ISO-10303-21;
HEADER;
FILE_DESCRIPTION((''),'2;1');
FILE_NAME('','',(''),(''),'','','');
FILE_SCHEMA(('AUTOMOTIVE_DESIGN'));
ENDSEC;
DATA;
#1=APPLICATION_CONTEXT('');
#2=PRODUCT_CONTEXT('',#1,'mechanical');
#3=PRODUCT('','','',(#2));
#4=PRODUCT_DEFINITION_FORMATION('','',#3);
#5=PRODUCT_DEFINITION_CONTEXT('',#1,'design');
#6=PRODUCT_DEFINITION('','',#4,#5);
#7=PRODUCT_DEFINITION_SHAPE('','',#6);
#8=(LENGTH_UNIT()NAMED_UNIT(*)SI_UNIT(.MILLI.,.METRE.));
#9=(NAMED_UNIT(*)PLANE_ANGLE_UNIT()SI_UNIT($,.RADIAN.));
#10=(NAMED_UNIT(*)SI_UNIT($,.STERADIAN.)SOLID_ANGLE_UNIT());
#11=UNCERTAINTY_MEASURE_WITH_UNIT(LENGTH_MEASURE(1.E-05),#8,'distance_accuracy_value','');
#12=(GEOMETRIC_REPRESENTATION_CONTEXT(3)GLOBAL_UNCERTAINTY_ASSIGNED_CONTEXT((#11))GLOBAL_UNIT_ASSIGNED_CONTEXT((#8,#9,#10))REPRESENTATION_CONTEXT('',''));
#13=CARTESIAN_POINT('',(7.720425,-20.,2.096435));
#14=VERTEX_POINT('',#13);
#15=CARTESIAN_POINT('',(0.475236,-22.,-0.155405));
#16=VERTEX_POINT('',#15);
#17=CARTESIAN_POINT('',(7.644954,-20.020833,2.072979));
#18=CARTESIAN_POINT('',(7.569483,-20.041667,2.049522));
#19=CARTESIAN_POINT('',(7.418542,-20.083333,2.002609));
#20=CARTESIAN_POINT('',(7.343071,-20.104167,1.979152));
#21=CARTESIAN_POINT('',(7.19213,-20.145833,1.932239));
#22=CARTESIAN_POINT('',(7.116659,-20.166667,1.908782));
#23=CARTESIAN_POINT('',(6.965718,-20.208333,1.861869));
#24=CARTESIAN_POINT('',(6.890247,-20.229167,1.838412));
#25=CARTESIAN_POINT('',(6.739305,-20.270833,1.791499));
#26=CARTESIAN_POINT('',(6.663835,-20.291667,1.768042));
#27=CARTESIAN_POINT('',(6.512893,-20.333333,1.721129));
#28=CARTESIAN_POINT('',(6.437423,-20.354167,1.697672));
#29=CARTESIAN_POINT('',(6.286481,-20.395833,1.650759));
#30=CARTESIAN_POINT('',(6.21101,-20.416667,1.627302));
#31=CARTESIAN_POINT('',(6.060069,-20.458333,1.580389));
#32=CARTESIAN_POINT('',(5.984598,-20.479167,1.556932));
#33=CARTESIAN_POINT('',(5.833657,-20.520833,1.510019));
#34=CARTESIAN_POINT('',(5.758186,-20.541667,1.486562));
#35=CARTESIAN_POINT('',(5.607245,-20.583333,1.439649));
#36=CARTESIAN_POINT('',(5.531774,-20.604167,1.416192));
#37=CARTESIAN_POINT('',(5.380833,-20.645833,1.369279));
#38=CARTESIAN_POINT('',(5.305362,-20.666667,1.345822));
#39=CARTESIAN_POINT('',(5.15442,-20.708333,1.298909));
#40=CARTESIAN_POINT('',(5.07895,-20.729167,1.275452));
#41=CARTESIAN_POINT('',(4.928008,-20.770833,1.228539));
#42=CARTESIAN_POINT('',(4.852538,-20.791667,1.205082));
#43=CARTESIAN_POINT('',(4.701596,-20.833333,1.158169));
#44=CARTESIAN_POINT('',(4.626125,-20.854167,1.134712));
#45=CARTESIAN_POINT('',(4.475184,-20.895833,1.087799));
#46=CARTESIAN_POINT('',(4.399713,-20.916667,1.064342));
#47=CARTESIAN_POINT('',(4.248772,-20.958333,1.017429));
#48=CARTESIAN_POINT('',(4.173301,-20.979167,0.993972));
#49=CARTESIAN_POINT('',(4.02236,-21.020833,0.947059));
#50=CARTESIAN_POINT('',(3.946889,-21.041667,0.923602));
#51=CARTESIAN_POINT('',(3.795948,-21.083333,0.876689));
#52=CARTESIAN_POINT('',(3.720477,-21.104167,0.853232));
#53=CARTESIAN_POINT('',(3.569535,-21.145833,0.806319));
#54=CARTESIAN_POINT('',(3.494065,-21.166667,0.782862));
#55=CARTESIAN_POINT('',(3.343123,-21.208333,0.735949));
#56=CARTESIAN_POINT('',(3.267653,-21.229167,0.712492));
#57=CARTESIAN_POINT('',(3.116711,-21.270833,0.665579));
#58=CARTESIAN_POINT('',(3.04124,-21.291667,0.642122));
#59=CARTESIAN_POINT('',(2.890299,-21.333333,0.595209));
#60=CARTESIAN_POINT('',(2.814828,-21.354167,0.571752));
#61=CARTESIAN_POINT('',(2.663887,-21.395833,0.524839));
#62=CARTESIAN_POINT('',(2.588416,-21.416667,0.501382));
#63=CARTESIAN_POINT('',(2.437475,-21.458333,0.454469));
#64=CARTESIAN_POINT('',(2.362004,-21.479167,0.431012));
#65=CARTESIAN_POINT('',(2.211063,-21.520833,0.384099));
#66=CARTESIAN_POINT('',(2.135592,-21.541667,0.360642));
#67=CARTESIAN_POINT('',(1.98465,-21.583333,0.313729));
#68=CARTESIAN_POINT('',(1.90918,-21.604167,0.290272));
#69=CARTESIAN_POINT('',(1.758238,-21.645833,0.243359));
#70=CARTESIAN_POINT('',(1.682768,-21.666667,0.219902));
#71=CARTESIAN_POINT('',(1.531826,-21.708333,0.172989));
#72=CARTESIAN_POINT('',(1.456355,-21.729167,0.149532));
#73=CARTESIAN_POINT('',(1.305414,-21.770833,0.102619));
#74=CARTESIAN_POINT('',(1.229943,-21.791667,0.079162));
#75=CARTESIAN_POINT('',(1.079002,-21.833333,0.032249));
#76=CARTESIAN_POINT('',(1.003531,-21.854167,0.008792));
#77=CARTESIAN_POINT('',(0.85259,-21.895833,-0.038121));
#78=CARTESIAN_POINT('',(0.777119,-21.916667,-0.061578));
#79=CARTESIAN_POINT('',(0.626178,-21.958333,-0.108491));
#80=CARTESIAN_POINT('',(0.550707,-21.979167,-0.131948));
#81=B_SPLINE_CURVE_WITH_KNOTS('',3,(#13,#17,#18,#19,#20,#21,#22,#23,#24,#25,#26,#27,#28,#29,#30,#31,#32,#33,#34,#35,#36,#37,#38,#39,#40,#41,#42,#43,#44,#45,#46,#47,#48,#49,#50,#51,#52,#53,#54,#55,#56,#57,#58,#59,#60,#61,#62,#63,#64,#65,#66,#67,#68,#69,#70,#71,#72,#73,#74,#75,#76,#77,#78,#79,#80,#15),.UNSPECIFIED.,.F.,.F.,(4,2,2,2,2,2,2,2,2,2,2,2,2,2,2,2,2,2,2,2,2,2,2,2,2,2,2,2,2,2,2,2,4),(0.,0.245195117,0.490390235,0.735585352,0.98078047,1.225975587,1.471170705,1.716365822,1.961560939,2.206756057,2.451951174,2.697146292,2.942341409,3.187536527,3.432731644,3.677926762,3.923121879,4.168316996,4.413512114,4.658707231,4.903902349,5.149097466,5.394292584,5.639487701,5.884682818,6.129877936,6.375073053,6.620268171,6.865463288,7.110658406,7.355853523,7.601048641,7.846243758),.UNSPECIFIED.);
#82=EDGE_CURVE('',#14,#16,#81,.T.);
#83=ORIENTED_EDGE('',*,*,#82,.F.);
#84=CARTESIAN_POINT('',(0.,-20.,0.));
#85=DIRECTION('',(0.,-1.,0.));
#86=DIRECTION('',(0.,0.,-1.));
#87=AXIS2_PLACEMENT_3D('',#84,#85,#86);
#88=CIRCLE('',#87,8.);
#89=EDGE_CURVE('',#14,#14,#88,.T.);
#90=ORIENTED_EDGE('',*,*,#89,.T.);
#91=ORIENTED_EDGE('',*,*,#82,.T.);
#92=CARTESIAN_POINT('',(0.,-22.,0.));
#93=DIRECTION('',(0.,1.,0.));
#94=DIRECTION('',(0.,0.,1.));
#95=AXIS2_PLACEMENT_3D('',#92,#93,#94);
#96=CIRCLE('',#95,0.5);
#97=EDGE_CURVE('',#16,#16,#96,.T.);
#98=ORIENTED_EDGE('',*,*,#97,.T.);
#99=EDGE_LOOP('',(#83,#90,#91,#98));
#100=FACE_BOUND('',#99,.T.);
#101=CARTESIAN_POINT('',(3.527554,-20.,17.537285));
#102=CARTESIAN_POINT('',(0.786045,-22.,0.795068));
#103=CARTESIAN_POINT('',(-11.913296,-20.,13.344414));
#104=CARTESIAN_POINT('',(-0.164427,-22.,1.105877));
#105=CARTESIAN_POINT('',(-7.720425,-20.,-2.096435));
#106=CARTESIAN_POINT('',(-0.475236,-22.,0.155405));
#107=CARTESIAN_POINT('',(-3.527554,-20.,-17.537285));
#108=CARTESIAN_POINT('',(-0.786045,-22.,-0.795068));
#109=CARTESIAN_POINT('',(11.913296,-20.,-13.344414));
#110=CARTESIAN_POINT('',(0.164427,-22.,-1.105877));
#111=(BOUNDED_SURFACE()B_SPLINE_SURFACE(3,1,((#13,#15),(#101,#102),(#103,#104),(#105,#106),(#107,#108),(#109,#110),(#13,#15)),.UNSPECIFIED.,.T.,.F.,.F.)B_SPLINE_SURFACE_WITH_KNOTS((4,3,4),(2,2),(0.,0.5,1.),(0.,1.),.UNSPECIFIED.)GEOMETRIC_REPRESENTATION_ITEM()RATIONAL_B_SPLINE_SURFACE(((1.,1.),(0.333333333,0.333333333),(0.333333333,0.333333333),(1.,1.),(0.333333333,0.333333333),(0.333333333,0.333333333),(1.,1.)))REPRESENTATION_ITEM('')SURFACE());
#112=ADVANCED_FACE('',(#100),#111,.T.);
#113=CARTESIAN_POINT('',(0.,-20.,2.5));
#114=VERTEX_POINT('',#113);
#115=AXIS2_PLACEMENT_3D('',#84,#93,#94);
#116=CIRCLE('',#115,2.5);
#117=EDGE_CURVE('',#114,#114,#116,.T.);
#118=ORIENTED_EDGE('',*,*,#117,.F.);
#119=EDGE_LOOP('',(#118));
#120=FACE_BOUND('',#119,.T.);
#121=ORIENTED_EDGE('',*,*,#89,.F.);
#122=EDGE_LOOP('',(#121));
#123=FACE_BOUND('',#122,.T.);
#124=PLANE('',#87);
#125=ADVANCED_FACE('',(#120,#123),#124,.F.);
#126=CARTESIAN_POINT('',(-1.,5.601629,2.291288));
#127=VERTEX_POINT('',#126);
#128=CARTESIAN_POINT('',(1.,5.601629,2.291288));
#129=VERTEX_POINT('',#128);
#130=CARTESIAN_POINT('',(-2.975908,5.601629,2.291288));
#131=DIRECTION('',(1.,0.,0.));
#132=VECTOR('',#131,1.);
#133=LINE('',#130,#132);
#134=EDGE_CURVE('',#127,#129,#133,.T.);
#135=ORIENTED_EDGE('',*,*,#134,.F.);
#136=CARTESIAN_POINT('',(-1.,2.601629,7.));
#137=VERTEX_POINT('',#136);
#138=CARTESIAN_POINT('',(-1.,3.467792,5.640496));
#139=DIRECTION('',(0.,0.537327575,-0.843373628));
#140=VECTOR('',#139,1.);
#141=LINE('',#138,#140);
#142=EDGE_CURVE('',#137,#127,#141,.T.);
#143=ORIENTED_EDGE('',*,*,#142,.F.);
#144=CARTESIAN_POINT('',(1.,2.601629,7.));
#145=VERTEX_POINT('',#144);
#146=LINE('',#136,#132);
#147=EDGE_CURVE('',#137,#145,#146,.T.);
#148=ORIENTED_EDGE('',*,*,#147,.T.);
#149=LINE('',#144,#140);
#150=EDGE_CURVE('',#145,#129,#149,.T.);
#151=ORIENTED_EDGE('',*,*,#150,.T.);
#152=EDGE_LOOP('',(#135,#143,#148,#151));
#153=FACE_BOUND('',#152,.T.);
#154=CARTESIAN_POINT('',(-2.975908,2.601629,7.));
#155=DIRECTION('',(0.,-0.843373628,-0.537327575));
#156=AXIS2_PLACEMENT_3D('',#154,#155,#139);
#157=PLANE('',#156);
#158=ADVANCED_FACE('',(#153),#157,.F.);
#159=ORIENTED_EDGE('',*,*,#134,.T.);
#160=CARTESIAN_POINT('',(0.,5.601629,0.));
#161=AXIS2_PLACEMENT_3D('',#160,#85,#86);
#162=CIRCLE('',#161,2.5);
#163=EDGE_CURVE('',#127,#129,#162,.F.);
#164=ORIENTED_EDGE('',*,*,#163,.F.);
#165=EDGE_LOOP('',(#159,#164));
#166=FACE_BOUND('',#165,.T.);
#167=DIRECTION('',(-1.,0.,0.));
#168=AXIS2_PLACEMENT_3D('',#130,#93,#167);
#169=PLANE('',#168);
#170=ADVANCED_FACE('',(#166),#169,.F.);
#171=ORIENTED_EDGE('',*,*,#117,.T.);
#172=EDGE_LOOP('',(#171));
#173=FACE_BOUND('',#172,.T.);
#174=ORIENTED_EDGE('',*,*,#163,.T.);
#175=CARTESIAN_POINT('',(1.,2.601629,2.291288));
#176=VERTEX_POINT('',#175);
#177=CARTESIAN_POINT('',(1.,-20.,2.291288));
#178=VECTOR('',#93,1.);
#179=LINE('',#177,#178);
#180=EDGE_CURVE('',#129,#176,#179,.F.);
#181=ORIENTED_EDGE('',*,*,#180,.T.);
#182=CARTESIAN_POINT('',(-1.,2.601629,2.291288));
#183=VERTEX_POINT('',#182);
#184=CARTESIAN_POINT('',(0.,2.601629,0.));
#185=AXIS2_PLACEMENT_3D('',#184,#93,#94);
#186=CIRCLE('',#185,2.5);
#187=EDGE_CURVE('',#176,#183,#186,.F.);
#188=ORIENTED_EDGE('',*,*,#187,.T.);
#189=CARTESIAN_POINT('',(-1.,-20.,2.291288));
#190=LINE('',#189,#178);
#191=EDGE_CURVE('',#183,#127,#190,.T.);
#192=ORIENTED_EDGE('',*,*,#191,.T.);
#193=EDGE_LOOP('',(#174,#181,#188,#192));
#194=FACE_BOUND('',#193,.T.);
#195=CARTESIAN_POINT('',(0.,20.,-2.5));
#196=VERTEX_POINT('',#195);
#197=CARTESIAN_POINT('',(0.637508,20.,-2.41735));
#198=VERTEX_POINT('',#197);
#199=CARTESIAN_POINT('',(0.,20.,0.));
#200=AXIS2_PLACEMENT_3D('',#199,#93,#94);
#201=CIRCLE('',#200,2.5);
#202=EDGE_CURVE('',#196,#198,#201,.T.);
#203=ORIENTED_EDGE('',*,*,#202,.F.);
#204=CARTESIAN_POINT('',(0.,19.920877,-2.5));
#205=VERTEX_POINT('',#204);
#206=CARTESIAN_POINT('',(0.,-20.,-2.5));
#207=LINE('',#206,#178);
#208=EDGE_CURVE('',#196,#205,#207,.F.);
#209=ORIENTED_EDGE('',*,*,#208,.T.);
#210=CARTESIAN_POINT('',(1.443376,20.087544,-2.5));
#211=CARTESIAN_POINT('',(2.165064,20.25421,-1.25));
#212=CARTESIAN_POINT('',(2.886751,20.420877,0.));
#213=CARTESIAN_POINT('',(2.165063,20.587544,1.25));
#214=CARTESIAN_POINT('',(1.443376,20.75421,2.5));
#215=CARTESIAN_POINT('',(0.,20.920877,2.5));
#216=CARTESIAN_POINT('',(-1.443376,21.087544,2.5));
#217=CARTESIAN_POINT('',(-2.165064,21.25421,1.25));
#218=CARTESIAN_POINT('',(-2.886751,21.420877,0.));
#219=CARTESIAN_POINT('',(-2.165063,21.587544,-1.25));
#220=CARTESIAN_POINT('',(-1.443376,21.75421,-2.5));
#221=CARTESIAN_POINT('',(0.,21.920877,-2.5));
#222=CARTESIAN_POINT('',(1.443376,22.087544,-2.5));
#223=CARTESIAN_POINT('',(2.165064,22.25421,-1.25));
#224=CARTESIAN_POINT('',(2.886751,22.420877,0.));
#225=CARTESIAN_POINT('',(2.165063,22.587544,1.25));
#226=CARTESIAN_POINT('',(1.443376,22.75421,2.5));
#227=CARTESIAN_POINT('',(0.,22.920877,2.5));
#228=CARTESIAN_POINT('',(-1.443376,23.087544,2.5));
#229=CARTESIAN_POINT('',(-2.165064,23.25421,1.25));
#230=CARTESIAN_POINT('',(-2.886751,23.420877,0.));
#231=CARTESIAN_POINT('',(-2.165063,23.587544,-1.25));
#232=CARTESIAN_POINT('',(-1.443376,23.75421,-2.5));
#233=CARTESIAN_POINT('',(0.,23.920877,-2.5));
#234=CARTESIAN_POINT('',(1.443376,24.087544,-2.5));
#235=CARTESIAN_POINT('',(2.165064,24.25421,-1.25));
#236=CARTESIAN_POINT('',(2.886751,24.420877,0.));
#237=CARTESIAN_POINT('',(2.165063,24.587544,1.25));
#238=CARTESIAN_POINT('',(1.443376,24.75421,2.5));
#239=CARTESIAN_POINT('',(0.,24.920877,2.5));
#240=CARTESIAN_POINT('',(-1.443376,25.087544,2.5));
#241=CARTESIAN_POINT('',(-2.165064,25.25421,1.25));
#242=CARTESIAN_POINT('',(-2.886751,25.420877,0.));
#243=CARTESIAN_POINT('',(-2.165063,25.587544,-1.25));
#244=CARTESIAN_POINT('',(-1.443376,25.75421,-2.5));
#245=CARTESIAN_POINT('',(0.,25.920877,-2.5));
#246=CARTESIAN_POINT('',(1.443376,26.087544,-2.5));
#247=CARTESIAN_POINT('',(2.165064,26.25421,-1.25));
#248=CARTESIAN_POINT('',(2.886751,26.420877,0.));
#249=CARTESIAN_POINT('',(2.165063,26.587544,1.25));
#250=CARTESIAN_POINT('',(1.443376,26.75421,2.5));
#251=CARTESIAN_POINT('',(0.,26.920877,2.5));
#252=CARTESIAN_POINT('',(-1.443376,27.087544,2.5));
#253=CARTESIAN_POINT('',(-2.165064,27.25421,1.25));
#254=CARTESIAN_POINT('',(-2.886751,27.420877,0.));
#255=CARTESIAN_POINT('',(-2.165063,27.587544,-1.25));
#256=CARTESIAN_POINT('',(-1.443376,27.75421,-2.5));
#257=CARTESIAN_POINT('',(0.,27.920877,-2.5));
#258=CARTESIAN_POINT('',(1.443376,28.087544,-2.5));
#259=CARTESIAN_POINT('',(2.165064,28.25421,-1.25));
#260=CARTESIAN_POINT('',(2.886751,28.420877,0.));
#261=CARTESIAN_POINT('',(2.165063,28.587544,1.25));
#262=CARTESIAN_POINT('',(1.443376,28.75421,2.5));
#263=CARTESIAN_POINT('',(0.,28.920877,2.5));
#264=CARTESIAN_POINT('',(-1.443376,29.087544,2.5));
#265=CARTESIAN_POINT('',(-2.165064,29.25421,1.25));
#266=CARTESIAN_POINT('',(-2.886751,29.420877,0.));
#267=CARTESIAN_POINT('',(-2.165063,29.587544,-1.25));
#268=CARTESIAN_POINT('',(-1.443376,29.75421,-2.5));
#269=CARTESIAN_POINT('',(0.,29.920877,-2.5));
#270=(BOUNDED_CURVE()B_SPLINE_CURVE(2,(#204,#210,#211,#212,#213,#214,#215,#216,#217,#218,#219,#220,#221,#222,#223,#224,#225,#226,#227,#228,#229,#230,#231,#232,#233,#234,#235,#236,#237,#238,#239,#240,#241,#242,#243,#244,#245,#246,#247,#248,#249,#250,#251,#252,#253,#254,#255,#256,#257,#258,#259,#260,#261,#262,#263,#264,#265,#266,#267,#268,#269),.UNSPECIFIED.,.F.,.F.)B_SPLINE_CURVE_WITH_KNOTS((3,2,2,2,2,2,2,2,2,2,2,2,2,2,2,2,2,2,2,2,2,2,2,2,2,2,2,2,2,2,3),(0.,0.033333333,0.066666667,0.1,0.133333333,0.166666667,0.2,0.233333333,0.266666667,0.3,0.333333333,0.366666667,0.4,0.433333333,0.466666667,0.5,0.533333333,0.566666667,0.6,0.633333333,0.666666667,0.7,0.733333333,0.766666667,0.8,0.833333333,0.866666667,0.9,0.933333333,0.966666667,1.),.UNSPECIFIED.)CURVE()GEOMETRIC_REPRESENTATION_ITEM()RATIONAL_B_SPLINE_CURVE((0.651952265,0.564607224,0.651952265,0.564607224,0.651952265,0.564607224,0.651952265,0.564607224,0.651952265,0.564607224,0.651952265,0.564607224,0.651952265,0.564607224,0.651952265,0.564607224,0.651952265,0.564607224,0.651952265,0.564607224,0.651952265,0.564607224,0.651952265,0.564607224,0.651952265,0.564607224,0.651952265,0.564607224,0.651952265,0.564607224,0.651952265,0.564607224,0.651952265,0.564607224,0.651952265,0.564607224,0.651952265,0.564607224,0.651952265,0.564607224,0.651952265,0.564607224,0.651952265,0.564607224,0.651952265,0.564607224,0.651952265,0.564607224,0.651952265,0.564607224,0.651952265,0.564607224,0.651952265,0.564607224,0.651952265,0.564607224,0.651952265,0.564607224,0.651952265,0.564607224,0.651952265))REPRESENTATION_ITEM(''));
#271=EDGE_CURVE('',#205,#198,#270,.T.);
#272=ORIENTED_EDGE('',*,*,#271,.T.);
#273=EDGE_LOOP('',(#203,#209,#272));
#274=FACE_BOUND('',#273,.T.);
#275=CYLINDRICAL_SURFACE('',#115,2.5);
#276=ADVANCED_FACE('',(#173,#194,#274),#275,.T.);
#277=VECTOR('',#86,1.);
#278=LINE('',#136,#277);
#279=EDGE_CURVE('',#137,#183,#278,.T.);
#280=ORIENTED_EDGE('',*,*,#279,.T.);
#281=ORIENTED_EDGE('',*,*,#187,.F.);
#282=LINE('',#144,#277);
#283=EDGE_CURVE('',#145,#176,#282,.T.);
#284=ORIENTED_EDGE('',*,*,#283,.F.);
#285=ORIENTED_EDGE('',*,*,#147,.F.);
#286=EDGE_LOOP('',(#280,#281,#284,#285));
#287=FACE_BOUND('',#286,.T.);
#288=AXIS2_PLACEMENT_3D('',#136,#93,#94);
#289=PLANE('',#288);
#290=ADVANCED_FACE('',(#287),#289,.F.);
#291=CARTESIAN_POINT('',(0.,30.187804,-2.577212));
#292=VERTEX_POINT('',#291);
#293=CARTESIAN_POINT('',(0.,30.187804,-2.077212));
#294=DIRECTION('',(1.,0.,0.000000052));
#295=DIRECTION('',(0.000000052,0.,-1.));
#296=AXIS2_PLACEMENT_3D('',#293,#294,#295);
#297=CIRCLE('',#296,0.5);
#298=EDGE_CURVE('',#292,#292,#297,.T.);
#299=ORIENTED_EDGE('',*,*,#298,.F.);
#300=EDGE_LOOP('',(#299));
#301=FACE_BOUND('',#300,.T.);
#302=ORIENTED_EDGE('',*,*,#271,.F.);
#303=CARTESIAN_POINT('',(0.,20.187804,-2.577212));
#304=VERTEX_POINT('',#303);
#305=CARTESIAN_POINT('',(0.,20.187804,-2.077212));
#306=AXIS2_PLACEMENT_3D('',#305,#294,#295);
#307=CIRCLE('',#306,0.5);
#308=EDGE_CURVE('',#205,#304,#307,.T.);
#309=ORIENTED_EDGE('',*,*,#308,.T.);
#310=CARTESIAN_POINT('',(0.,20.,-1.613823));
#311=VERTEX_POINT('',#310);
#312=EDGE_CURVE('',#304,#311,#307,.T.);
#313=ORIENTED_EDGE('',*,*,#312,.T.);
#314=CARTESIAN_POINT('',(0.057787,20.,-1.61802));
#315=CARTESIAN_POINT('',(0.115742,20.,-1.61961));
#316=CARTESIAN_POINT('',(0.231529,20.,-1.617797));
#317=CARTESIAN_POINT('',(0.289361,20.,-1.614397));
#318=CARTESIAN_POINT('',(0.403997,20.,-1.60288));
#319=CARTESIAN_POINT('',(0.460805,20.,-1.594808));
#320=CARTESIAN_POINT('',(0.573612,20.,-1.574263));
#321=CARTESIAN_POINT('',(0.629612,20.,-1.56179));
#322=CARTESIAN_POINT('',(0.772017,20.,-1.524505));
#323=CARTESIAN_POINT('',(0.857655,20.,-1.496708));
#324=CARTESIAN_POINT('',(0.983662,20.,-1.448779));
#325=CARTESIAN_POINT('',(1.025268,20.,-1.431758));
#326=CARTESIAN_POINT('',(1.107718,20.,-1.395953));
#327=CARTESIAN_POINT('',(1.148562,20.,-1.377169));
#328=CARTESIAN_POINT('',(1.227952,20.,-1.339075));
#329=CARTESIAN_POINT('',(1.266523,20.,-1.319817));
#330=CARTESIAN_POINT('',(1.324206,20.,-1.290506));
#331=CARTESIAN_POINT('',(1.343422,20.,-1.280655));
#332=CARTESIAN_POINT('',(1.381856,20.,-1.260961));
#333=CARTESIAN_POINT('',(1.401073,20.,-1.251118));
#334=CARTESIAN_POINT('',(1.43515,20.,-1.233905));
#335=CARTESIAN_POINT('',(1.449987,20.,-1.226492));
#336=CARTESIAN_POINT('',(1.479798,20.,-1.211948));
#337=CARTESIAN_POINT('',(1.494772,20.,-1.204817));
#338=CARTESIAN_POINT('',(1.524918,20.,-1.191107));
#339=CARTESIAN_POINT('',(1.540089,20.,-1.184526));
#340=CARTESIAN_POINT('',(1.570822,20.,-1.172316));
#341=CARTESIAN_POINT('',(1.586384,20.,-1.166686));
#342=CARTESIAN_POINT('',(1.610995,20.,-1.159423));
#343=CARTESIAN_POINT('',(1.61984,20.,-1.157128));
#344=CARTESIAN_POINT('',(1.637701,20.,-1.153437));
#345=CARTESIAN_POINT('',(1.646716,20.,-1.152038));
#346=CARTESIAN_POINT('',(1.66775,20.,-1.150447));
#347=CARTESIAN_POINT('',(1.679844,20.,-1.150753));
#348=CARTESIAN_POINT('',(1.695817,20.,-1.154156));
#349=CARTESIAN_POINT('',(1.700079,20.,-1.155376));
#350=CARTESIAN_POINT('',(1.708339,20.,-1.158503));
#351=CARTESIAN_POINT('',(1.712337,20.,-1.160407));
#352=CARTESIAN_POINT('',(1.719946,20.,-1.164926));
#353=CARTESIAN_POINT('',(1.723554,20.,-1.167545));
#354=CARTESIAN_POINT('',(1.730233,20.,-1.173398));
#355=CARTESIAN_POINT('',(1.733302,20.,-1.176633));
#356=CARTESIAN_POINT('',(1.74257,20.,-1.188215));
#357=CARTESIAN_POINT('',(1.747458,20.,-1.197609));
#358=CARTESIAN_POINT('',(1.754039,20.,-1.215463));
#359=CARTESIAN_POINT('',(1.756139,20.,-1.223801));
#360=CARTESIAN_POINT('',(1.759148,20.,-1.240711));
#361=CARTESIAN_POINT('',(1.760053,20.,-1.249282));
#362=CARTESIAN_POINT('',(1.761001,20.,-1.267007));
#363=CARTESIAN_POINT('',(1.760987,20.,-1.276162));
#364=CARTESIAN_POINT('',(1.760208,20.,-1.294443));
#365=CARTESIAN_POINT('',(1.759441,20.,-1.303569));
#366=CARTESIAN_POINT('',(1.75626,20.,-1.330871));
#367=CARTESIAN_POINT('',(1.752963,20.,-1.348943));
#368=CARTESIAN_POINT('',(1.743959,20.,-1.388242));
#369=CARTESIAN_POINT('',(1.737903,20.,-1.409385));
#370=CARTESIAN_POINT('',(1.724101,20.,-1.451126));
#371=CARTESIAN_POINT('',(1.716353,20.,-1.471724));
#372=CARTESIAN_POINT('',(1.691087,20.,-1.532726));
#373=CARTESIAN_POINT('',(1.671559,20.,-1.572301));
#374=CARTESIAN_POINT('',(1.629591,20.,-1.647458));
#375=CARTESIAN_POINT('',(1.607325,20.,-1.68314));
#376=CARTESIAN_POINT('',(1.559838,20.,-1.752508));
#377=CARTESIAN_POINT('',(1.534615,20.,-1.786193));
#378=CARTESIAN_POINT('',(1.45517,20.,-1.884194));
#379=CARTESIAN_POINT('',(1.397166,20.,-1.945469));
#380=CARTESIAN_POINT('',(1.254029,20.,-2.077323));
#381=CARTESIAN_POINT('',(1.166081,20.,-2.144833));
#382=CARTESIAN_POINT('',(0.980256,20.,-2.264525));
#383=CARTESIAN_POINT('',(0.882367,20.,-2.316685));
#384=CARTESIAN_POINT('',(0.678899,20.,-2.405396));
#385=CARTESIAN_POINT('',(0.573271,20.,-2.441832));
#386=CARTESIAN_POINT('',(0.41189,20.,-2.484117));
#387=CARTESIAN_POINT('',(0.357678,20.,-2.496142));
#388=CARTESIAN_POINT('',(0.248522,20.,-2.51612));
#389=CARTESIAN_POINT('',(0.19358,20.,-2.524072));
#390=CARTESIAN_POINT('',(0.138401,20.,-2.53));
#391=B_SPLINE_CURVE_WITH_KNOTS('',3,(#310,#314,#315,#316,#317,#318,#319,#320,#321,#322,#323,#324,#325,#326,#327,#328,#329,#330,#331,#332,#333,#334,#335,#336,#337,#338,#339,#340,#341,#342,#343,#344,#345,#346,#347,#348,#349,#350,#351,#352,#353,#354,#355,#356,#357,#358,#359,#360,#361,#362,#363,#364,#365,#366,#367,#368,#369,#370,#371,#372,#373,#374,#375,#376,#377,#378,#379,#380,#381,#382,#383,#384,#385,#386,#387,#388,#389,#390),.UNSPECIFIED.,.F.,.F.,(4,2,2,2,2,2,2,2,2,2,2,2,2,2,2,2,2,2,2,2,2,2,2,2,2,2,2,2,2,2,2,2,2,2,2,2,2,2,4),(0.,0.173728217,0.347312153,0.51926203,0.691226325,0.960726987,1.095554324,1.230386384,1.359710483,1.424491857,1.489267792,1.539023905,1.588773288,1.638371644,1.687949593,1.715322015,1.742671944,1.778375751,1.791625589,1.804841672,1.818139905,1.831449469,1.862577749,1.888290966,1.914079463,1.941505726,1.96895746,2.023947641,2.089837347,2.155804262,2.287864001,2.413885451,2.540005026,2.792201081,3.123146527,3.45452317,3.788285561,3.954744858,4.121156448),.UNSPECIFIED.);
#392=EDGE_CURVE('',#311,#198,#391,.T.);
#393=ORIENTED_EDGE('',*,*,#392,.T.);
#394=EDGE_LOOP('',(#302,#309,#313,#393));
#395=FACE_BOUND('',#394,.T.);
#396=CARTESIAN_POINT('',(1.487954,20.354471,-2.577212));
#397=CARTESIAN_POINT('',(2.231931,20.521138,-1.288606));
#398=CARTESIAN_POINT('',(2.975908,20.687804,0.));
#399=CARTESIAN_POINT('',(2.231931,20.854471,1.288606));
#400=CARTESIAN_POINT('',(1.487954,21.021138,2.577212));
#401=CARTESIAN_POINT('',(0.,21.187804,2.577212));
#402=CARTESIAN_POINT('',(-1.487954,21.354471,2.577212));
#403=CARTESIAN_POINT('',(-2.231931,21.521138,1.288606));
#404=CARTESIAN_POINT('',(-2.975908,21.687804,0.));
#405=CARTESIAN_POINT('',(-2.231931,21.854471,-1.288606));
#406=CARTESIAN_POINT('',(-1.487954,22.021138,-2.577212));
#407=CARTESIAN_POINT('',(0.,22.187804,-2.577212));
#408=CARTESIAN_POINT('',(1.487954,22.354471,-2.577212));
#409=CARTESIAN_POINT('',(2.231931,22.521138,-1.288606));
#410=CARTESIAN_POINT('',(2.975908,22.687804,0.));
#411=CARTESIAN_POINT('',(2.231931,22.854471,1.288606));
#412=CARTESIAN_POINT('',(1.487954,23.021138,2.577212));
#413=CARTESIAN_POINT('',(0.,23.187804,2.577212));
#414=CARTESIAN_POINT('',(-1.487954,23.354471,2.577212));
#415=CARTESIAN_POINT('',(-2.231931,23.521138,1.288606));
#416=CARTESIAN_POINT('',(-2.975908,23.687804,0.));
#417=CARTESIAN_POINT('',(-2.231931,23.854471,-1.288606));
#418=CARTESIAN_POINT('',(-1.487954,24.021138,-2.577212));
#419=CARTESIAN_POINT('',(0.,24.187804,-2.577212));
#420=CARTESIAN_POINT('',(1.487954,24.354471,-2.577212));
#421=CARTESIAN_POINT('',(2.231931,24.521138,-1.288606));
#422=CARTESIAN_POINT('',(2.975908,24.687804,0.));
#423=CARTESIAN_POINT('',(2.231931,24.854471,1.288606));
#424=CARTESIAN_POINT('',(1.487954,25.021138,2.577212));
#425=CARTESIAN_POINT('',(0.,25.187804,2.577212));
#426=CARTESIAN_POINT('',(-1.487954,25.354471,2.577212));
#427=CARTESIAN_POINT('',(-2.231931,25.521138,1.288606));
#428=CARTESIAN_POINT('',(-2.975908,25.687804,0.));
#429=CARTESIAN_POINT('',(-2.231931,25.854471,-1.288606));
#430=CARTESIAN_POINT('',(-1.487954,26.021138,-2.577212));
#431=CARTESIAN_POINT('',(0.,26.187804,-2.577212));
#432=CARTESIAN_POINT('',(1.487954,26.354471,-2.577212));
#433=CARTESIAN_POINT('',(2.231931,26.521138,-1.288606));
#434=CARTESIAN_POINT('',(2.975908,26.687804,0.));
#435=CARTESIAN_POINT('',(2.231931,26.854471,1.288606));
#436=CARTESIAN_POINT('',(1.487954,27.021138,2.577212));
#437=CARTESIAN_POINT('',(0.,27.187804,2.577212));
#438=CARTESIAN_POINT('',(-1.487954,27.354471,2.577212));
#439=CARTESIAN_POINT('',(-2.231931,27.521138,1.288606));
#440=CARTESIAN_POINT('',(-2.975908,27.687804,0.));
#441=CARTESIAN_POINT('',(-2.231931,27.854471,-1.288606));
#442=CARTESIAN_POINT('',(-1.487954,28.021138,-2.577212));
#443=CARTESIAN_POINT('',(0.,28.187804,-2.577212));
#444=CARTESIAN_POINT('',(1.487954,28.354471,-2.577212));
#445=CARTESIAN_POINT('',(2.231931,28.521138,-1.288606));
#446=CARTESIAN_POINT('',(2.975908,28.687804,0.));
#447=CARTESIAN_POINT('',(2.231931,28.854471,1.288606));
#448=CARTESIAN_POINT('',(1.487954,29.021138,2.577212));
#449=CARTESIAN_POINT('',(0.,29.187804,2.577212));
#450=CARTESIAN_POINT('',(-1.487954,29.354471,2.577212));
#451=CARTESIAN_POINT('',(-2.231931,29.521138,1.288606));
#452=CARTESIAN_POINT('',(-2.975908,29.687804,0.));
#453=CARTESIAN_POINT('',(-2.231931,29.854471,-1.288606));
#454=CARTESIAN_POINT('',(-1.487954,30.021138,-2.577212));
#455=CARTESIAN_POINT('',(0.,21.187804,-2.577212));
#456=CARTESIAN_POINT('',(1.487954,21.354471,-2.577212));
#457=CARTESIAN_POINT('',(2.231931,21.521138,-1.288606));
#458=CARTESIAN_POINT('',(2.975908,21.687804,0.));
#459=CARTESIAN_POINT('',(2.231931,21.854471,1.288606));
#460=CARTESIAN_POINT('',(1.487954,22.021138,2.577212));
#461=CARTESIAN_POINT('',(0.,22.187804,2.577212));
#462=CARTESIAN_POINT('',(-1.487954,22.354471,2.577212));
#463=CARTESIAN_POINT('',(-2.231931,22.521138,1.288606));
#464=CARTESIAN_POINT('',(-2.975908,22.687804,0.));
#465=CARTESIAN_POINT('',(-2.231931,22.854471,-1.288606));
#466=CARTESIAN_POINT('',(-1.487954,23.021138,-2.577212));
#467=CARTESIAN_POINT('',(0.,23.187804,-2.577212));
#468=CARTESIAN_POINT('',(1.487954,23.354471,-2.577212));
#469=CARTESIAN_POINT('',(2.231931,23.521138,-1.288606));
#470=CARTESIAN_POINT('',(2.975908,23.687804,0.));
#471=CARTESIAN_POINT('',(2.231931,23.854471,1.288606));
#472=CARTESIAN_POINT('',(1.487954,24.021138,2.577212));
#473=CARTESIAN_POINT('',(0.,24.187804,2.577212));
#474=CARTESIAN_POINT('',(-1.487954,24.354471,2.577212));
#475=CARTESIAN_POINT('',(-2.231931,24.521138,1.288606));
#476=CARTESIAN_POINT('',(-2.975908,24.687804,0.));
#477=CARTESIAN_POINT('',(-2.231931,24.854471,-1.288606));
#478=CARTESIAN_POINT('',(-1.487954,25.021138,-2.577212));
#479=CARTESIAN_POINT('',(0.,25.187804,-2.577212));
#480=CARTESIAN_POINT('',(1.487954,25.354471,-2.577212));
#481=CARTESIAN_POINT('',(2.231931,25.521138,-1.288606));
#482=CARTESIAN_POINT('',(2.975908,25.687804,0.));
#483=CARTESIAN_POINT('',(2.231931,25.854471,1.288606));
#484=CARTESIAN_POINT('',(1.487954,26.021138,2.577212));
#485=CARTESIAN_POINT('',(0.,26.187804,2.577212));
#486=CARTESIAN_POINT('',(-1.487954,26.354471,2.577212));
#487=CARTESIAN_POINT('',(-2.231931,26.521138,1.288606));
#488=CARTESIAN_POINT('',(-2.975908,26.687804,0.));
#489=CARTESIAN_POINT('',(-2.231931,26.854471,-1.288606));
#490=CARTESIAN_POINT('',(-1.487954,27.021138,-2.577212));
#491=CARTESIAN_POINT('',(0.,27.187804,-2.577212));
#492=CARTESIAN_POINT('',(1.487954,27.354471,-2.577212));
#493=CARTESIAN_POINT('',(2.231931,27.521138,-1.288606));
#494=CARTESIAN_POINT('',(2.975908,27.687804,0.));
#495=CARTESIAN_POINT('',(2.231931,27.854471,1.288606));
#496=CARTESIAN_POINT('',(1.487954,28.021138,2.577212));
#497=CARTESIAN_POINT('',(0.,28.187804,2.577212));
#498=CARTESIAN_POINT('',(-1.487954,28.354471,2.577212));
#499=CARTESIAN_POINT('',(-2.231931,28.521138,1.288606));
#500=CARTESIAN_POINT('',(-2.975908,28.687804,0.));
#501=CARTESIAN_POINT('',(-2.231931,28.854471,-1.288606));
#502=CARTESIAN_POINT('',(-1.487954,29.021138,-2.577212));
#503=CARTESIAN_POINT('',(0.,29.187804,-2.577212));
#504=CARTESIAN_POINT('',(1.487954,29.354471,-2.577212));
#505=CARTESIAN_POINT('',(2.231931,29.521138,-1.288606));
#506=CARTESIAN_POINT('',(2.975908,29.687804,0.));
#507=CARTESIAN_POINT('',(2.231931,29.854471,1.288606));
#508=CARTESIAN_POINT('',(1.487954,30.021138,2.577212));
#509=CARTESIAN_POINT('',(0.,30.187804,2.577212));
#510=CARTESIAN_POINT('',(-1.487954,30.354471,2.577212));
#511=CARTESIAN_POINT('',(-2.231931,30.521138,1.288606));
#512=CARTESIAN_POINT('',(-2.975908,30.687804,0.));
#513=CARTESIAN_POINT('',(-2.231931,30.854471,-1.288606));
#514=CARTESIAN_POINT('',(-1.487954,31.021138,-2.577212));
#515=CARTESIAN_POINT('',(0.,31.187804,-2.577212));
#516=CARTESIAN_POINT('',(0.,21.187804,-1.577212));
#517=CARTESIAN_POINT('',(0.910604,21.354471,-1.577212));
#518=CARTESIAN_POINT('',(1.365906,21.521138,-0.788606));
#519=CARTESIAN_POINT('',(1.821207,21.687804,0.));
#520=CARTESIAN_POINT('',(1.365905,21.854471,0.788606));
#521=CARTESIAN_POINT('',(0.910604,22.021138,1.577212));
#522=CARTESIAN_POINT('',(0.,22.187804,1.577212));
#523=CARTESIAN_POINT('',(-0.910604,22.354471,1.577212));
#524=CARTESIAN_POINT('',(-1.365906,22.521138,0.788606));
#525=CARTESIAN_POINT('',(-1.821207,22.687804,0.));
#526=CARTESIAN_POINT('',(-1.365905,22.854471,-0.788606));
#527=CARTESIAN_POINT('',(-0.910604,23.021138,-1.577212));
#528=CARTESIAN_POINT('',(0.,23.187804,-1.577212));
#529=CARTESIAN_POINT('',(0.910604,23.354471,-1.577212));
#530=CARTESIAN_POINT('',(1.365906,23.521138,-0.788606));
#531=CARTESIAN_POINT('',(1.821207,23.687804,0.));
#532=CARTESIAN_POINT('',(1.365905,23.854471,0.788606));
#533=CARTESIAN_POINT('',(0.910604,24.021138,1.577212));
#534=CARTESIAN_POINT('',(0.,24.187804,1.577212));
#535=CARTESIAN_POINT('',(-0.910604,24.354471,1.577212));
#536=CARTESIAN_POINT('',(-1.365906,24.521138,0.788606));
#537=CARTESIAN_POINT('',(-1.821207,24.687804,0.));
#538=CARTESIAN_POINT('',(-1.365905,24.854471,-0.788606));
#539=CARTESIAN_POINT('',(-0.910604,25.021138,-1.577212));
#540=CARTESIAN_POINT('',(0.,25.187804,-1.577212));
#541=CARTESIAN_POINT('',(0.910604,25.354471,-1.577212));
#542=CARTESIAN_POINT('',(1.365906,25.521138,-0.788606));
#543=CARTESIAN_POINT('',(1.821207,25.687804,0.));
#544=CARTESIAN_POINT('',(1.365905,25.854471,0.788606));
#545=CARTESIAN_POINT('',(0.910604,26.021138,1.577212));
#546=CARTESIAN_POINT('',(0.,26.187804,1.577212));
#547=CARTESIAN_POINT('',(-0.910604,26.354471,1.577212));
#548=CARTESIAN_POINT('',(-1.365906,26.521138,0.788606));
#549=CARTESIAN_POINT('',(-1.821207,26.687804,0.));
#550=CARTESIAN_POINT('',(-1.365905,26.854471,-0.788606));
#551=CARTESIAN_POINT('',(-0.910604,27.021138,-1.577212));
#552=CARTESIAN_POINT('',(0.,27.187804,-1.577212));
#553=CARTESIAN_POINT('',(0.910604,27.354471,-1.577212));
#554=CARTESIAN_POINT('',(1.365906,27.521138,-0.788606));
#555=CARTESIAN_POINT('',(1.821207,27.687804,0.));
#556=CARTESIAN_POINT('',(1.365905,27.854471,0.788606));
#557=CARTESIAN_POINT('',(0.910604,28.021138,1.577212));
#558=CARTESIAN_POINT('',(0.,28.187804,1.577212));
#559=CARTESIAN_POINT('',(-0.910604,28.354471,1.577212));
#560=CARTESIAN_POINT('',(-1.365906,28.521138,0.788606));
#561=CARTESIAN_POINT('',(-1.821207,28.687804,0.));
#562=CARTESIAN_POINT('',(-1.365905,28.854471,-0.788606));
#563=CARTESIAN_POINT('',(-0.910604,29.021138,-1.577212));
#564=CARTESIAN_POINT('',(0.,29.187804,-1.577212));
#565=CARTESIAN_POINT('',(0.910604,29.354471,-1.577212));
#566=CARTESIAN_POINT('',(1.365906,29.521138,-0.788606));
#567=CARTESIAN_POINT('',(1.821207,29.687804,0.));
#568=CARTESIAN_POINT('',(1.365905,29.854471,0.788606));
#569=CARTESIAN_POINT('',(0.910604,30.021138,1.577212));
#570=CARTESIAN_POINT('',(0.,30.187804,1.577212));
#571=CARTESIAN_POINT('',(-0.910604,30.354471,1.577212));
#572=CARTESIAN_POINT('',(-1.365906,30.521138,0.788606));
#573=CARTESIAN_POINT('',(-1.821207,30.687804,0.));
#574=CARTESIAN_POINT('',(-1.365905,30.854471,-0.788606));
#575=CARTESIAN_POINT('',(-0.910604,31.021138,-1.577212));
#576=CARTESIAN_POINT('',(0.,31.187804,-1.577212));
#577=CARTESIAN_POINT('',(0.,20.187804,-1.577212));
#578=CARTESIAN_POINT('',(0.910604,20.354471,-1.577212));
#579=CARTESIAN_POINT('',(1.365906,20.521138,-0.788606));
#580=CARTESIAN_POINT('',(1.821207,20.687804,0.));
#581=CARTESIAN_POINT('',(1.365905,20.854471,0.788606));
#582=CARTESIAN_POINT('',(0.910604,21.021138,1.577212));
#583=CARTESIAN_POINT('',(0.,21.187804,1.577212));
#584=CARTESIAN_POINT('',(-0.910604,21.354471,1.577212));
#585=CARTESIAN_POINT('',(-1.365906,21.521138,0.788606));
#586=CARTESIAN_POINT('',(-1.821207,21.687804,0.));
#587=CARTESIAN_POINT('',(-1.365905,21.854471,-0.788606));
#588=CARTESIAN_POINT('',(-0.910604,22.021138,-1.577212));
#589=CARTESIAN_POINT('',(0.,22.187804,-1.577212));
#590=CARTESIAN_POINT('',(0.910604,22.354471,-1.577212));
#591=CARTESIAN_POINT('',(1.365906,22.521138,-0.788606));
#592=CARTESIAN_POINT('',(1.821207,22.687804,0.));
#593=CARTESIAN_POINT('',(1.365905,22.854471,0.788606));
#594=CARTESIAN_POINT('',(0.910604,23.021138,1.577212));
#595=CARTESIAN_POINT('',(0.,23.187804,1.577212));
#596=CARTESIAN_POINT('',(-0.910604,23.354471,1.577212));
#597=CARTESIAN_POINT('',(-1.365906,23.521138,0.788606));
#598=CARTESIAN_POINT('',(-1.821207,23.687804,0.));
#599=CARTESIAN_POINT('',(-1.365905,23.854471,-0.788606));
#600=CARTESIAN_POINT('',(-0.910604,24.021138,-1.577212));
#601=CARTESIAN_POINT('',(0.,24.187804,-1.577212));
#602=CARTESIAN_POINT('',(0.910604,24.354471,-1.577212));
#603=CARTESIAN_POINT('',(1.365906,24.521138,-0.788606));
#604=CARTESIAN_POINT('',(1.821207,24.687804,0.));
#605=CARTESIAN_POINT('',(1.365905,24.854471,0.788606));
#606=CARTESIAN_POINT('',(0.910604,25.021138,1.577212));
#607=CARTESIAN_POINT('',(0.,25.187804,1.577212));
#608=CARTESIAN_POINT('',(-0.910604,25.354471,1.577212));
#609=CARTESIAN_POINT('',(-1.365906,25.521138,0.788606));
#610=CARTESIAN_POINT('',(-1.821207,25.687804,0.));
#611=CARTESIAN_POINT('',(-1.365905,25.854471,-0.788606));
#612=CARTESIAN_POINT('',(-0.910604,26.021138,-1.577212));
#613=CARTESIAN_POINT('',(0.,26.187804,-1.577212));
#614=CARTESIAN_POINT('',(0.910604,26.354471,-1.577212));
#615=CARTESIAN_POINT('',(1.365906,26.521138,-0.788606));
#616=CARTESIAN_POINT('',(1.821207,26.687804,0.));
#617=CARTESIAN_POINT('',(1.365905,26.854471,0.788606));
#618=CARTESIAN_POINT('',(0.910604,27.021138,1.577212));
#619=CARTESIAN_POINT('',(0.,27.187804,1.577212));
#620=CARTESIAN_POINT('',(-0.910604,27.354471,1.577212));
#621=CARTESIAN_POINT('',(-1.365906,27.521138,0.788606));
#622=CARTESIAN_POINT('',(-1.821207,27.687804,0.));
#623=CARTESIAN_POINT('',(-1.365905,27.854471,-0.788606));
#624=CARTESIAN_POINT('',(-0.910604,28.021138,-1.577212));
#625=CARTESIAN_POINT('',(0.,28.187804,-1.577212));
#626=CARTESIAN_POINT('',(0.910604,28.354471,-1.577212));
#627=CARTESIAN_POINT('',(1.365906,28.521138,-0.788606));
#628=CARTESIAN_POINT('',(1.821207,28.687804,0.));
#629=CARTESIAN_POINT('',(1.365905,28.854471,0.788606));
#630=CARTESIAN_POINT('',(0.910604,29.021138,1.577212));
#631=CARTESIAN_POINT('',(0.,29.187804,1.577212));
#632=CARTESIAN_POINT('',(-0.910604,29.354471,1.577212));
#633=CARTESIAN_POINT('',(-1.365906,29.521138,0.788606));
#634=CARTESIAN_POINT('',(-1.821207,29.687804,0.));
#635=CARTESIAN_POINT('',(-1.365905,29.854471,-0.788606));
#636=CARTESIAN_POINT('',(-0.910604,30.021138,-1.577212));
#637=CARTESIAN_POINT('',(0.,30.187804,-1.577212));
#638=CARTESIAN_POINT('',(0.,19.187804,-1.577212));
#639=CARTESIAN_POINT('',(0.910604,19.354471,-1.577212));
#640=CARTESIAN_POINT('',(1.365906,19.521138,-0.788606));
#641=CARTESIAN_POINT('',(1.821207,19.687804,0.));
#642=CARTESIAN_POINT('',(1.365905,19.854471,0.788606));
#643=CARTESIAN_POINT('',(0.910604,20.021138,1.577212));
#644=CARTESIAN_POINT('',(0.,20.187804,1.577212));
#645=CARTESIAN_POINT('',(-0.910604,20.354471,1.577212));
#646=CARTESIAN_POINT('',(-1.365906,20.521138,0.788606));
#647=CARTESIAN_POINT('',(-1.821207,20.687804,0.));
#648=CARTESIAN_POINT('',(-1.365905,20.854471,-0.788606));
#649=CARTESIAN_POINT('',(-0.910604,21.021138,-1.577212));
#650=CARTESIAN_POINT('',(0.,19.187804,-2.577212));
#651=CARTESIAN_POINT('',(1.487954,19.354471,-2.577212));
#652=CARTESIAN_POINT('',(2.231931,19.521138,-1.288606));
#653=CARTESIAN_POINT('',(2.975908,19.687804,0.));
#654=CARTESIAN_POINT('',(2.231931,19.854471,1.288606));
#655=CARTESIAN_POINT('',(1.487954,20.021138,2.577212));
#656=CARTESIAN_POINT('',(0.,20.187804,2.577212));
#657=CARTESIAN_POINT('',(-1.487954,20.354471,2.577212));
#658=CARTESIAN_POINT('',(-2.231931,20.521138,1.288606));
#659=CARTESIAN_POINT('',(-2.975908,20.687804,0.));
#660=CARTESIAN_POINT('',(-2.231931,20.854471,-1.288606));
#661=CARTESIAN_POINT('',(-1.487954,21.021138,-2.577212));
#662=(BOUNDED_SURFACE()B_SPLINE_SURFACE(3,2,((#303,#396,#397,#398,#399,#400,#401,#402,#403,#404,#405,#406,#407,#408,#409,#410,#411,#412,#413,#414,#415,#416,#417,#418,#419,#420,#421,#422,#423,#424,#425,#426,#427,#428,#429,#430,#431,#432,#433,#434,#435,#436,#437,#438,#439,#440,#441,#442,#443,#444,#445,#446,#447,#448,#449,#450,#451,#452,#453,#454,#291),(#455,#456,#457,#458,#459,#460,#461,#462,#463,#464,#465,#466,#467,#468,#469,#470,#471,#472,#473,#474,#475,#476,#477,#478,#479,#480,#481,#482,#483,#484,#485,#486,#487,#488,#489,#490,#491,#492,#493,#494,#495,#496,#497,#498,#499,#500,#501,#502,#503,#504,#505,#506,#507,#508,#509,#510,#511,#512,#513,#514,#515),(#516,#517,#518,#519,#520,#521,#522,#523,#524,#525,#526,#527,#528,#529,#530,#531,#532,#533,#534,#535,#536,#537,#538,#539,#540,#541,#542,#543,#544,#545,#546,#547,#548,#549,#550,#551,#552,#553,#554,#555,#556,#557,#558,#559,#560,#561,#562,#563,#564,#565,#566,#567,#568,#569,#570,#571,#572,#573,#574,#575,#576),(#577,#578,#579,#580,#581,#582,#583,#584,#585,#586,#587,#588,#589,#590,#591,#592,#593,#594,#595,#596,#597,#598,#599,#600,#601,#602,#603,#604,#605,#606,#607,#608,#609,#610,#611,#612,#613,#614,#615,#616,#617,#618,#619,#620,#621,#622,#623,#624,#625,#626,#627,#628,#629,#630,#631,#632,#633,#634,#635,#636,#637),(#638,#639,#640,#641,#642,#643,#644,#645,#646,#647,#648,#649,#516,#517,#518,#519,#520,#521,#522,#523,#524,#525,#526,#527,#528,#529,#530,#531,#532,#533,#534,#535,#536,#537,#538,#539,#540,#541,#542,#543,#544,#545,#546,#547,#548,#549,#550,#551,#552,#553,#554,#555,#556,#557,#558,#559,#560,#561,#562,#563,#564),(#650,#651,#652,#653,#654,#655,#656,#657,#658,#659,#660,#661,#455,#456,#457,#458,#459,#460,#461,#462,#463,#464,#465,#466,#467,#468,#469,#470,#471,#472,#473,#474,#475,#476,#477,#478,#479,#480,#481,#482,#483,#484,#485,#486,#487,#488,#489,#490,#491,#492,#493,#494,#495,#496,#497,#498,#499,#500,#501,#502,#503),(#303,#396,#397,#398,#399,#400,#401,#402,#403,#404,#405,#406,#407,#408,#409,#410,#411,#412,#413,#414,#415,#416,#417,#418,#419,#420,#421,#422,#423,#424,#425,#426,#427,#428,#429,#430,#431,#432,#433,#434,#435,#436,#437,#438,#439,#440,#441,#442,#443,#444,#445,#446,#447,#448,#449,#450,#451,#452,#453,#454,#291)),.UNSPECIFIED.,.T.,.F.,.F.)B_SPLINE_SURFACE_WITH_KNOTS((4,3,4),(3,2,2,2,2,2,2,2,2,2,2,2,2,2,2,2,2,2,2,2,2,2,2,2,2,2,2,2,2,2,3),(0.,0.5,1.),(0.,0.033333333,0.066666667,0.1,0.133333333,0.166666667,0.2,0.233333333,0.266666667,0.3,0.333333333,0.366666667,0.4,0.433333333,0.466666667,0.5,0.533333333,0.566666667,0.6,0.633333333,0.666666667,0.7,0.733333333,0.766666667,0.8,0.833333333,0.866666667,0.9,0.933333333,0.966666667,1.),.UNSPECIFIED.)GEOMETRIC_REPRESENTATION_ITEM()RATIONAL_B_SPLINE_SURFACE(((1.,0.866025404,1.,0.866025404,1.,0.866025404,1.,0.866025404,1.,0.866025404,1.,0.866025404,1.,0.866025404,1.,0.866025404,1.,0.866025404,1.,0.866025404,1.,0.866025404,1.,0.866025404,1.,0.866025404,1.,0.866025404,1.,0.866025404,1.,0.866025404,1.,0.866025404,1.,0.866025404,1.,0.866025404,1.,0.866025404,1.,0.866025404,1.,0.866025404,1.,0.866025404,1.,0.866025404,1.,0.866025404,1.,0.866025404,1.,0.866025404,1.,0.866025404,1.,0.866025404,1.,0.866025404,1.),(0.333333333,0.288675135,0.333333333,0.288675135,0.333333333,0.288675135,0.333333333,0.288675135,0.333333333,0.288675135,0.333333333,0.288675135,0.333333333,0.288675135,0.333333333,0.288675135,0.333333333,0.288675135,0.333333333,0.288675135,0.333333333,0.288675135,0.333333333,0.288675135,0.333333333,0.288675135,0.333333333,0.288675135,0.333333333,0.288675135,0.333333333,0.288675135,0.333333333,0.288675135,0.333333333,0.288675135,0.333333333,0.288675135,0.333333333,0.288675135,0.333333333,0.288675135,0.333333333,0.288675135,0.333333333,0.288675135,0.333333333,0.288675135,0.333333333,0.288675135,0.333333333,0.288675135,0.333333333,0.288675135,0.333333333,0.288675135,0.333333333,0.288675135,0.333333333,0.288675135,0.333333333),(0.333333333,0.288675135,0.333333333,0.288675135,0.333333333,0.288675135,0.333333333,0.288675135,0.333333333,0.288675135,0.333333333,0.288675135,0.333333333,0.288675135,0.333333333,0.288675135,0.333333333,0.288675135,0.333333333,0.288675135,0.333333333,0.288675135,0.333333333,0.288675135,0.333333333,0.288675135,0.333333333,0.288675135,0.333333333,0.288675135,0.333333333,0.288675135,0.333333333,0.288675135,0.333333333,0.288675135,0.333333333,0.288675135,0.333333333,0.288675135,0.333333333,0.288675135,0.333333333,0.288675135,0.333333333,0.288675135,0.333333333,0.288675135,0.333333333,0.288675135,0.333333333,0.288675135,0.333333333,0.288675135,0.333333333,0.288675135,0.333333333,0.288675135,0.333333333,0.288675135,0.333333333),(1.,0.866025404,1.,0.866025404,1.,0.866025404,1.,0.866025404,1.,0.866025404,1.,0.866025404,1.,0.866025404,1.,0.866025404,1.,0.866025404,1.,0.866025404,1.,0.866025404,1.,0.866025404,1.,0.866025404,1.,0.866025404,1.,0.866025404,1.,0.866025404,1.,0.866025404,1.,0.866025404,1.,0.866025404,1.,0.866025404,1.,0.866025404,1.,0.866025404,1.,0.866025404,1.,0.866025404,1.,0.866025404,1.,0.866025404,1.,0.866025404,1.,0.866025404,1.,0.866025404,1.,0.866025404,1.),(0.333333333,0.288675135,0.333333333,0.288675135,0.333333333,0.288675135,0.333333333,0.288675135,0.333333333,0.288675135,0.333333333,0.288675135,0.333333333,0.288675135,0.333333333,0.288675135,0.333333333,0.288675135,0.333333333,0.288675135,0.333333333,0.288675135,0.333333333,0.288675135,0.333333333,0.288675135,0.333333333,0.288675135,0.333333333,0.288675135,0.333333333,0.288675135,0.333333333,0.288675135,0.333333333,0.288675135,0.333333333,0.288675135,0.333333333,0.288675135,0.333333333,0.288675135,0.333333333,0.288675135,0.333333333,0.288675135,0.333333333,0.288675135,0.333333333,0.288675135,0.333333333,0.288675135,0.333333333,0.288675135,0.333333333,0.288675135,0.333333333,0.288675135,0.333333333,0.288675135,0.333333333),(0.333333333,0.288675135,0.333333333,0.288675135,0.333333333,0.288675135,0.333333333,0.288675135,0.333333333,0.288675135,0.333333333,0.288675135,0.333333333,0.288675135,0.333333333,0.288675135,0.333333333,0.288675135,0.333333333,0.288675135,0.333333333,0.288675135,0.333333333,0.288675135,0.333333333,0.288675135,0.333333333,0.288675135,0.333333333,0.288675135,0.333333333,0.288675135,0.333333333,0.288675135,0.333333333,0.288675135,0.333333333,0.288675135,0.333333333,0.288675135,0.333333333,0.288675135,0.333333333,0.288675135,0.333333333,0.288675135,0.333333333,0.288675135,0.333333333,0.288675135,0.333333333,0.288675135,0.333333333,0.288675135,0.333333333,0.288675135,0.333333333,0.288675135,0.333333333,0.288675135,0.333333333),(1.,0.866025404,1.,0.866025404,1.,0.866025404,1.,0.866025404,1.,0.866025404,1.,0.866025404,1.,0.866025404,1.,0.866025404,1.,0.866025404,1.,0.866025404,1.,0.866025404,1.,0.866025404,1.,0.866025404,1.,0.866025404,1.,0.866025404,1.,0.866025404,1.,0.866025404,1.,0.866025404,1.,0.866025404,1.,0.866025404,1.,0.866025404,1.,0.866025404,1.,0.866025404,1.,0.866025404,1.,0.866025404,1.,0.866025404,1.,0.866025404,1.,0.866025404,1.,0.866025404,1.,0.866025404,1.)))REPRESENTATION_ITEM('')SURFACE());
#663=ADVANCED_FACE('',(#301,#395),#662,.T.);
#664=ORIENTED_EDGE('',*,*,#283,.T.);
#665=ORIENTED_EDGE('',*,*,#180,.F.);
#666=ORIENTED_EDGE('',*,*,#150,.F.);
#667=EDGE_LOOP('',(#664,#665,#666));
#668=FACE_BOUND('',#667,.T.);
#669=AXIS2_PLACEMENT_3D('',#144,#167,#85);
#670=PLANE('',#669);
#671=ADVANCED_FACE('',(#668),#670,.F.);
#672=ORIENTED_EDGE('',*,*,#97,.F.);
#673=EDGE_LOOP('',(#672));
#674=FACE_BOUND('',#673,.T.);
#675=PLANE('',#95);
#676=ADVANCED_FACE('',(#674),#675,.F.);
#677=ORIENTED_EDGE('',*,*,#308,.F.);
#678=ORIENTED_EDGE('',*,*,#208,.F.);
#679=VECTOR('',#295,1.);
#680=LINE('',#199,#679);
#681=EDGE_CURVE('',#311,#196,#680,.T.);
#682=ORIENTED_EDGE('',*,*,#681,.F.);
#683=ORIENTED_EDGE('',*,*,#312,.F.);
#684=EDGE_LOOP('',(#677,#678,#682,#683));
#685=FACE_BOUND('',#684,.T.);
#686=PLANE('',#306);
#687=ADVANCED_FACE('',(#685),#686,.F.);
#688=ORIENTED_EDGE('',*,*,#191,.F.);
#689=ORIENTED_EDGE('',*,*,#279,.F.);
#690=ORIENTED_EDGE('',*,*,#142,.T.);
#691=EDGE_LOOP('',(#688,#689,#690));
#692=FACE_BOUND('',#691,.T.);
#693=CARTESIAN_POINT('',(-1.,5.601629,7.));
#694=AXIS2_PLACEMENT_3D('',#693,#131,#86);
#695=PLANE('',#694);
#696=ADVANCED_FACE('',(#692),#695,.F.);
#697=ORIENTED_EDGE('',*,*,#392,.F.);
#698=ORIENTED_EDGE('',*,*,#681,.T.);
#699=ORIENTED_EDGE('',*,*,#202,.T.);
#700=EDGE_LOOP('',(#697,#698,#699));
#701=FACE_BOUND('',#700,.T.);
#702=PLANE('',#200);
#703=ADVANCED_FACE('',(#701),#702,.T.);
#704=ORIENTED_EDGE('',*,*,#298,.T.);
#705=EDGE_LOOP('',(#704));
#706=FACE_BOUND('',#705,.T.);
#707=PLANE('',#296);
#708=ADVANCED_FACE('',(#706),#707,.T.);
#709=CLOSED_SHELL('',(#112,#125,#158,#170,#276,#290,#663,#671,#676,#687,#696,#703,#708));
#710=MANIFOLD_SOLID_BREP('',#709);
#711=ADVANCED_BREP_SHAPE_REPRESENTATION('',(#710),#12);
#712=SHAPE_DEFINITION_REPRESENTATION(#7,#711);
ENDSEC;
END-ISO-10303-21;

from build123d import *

# Parameters (mm, degrees)
EXTRUDE1_DEPTH      = 20
EXTRUDE1_DEPTH_BACK = 20
SKETCH1_R           = 2.5
SWEEP1_PITCH        = 2
SKETCH12_W          = 2
SKETCH12_H          = 3
EXTRUDE3_DEPTH      = 7
CUT_EXTRUDE2_DEPTH  = 32.678664408


with BuildPart() as part:
    # Sketch1 → Extrude1 (new, two sides: drawn at the far end of the back side and taken through both)
    with BuildSketch(Plane(origin=(0, 0, 0), x_dir=(1, 0, 0), z_dir=(0, 1, 0)).offset(-EXTRUDE1_DEPTH_BACK)):
        with Locations(Location((0, 0, 0), (0, 0, 270))):
            Circle(SKETCH1_R)
    extrude(amount=EXTRUDE1_DEPTH + EXTRUDE1_DEPTH_BACK)

    # Sweep1: arcs per turn and ends read off the stored shape
    # Sweep1: the profile of Sketch10 screwed along a left-hand helix through 5 turns, 6 arcs to a turn; built about Z, then put on its axis
    sweep1_z = Axis((0, 0, 0), (0, 0, 1))
    sweep1_corners = [(2.577211863, 0, 0.187804208), (2.077211863, 0, 0.687804208), (1.577211863, 0, 0.187804208), (2.077211863, 0, -0.312195792)]
    with BuildLine(mode=Mode.PRIVATE) as sweep1_profile:
        ThreePointArc((2.577211863, 0, 0.187804208), (2.430765254, 0, 0.541357598), (2.077211863, 0, 0.687804208))
        ThreePointArc((2.077211863, 0, 0.687804208), (1.723658472, 0, 0.541357598), (1.577211863, 0, 0.187804208))
        ThreePointArc((1.577211863, 0, 0.187804208), (1.723658472, 0, -0.165749183), (2.077211863, 0, -0.312195792))
        ThreePointArc((2.077211863, 0, -0.312195792), (2.430765254, 0, -0.165749183), (2.577211863, 0, 0.187804208))
    sweep1_cap = Face(sweep1_profile.wire())
    sweep1_arcs = [((2.577211863, 0, 0.187804208), (2.577211863, 0, 0.687804208), (2.077211863, 0, 0.687804208), (1, 0.7071067811865476, 1)), ((2.077211863, 0, 0.687804208), (1.577211863, 0, 0.687804208), (1.577211863, 0, 0.187804208), (1, 0.7071067811865476, 1)), ((1.577211863, 0, 0.187804208), (1.577211863, 0, -0.312195792), (2.077211863, 0, -0.312195792), (1, 0.7071067811865476, 1)), ((2.077211863, 0, -0.312195792), (2.577211863, 0, -0.312195792), (2.577211863, 0, 0.187804208), (1, 0.7071067811865476, 1))]  # start, shoulder, end, weights
    sweep1_turn_angles = [0, -30, -60, -90, -120, -150, -180, -210, -240, -270, -300, -330, -360]
    sweep1_turn_weights = [1, 0.8660254037844387, 1, 0.8660254037844387, 1, 0.8660254037844387, 1, 0.8660254037844387, 1, 0.8660254037844387, 1, 0.8660254037844387, 1]
    sweep1_turn_sides = [Face.make_bezier_surface([[Vector(p[j][0], p[j][1], 0).rotate(sweep1_z, sweep1_turn_angles[2 * i + k]) / sweep1_turn_weights[2 * i + k] + Vector(0, 0, p[j][2] + -SWEEP1_PITCH * sweep1_turn_angles[2 * i + k] / 360) for k in range(3)] for j in range(3)], [[p[3][j] * sweep1_turn_weights[2 * i + k] for k in range(3)] for j in range(3)]) for p in sweep1_arcs for i in range(6)]
    sweep1 = Plane(origin=(0, 20, 0), x_dir=(0, 0, -1), z_dir=(0, 1, 0)) * Solid(Shell([*[p.moved(Location((0, 0, SWEEP1_PITCH * i))) for i in range(5) for p in sweep1_turn_sides], sweep1_cap, sweep1_cap.rotate(sweep1_z, -1800).moved(Location((0, 0, -SWEEP1_PITCH * -1800 / 360)))]))
    add(sweep1)

    # Sketch12 → Extrude3 (add)
    with BuildSketch(Plane.XY):
        with Locations((0, 4.101629468)):
            Rectangle(SKETCH12_W, SKETCH12_H)
    extrude(amount=EXTRUDE3_DEPTH)

    # Sketch14 → Cut-Extrude2 (cut, through all)
    with BuildSketch(Plane(origin=(1, 0, 0), x_dir=(0, 0, -1), z_dir=(1, 0, 0))):
        Polygon((-7, 2.601629468), (-2.291287847, 5.601629468), (-7, 5.601629468), align=None)
    extrude(amount=-CUT_EXTRUDE2_DEPTH, mode=Mode.SUBTRACT)

    # Loft1: read off the stored shape, not the designer's step
    # Loft1: loft between two sections, ruled curve by curve
    loft1_from = [
        Edge.make_bspline([(7.720424749, -20, 2.096435475), (3.527553799, -20, 17.537284972), (-11.913295698, -20, 13.344414022), (-7.720424749, -20, -2.096435475), (-3.527553799, -20, -17.537284972), (11.913295698, -20, -13.344414022), (7.720424749, -20, 2.096435475)], [0, 0, 0, 0, 0.5, 0.5, 0.5, 1, 1, 1, 1], 3, [1, 0.333333333, 0.333333333, 1, 0.333333333, 0.333333333, 1]),
    ]
    loft1_to = [
        Edge.make_bspline([(0.475236172, -22, -0.155404572), (0.786045316, -22, 0.795067772), (-0.164427028, -22, 1.105876916), (-0.475236172, -22, 0.155404572), (-0.786045316, -22, -0.795067772), (0.164427028, -22, -1.105876916), (0.475236172, -22, -0.155404572)], [0, 0, 0, 0, 0.5, 0.5, 0.5, 1, 1, 1, 1], 3, [1, 0.333333333, 0.333333333, 1, 0.333333333, 0.333333333, 1]),
    ]
    loft1 = Solid(Shell([*[Face.make_surface_from_curves(loft1_from[k], loft1_to[k]) for k in range(1)], Face(Wire(loft1_from)), Face(Wire(loft1_to))]))
    add(loft1)


solid = part.part
